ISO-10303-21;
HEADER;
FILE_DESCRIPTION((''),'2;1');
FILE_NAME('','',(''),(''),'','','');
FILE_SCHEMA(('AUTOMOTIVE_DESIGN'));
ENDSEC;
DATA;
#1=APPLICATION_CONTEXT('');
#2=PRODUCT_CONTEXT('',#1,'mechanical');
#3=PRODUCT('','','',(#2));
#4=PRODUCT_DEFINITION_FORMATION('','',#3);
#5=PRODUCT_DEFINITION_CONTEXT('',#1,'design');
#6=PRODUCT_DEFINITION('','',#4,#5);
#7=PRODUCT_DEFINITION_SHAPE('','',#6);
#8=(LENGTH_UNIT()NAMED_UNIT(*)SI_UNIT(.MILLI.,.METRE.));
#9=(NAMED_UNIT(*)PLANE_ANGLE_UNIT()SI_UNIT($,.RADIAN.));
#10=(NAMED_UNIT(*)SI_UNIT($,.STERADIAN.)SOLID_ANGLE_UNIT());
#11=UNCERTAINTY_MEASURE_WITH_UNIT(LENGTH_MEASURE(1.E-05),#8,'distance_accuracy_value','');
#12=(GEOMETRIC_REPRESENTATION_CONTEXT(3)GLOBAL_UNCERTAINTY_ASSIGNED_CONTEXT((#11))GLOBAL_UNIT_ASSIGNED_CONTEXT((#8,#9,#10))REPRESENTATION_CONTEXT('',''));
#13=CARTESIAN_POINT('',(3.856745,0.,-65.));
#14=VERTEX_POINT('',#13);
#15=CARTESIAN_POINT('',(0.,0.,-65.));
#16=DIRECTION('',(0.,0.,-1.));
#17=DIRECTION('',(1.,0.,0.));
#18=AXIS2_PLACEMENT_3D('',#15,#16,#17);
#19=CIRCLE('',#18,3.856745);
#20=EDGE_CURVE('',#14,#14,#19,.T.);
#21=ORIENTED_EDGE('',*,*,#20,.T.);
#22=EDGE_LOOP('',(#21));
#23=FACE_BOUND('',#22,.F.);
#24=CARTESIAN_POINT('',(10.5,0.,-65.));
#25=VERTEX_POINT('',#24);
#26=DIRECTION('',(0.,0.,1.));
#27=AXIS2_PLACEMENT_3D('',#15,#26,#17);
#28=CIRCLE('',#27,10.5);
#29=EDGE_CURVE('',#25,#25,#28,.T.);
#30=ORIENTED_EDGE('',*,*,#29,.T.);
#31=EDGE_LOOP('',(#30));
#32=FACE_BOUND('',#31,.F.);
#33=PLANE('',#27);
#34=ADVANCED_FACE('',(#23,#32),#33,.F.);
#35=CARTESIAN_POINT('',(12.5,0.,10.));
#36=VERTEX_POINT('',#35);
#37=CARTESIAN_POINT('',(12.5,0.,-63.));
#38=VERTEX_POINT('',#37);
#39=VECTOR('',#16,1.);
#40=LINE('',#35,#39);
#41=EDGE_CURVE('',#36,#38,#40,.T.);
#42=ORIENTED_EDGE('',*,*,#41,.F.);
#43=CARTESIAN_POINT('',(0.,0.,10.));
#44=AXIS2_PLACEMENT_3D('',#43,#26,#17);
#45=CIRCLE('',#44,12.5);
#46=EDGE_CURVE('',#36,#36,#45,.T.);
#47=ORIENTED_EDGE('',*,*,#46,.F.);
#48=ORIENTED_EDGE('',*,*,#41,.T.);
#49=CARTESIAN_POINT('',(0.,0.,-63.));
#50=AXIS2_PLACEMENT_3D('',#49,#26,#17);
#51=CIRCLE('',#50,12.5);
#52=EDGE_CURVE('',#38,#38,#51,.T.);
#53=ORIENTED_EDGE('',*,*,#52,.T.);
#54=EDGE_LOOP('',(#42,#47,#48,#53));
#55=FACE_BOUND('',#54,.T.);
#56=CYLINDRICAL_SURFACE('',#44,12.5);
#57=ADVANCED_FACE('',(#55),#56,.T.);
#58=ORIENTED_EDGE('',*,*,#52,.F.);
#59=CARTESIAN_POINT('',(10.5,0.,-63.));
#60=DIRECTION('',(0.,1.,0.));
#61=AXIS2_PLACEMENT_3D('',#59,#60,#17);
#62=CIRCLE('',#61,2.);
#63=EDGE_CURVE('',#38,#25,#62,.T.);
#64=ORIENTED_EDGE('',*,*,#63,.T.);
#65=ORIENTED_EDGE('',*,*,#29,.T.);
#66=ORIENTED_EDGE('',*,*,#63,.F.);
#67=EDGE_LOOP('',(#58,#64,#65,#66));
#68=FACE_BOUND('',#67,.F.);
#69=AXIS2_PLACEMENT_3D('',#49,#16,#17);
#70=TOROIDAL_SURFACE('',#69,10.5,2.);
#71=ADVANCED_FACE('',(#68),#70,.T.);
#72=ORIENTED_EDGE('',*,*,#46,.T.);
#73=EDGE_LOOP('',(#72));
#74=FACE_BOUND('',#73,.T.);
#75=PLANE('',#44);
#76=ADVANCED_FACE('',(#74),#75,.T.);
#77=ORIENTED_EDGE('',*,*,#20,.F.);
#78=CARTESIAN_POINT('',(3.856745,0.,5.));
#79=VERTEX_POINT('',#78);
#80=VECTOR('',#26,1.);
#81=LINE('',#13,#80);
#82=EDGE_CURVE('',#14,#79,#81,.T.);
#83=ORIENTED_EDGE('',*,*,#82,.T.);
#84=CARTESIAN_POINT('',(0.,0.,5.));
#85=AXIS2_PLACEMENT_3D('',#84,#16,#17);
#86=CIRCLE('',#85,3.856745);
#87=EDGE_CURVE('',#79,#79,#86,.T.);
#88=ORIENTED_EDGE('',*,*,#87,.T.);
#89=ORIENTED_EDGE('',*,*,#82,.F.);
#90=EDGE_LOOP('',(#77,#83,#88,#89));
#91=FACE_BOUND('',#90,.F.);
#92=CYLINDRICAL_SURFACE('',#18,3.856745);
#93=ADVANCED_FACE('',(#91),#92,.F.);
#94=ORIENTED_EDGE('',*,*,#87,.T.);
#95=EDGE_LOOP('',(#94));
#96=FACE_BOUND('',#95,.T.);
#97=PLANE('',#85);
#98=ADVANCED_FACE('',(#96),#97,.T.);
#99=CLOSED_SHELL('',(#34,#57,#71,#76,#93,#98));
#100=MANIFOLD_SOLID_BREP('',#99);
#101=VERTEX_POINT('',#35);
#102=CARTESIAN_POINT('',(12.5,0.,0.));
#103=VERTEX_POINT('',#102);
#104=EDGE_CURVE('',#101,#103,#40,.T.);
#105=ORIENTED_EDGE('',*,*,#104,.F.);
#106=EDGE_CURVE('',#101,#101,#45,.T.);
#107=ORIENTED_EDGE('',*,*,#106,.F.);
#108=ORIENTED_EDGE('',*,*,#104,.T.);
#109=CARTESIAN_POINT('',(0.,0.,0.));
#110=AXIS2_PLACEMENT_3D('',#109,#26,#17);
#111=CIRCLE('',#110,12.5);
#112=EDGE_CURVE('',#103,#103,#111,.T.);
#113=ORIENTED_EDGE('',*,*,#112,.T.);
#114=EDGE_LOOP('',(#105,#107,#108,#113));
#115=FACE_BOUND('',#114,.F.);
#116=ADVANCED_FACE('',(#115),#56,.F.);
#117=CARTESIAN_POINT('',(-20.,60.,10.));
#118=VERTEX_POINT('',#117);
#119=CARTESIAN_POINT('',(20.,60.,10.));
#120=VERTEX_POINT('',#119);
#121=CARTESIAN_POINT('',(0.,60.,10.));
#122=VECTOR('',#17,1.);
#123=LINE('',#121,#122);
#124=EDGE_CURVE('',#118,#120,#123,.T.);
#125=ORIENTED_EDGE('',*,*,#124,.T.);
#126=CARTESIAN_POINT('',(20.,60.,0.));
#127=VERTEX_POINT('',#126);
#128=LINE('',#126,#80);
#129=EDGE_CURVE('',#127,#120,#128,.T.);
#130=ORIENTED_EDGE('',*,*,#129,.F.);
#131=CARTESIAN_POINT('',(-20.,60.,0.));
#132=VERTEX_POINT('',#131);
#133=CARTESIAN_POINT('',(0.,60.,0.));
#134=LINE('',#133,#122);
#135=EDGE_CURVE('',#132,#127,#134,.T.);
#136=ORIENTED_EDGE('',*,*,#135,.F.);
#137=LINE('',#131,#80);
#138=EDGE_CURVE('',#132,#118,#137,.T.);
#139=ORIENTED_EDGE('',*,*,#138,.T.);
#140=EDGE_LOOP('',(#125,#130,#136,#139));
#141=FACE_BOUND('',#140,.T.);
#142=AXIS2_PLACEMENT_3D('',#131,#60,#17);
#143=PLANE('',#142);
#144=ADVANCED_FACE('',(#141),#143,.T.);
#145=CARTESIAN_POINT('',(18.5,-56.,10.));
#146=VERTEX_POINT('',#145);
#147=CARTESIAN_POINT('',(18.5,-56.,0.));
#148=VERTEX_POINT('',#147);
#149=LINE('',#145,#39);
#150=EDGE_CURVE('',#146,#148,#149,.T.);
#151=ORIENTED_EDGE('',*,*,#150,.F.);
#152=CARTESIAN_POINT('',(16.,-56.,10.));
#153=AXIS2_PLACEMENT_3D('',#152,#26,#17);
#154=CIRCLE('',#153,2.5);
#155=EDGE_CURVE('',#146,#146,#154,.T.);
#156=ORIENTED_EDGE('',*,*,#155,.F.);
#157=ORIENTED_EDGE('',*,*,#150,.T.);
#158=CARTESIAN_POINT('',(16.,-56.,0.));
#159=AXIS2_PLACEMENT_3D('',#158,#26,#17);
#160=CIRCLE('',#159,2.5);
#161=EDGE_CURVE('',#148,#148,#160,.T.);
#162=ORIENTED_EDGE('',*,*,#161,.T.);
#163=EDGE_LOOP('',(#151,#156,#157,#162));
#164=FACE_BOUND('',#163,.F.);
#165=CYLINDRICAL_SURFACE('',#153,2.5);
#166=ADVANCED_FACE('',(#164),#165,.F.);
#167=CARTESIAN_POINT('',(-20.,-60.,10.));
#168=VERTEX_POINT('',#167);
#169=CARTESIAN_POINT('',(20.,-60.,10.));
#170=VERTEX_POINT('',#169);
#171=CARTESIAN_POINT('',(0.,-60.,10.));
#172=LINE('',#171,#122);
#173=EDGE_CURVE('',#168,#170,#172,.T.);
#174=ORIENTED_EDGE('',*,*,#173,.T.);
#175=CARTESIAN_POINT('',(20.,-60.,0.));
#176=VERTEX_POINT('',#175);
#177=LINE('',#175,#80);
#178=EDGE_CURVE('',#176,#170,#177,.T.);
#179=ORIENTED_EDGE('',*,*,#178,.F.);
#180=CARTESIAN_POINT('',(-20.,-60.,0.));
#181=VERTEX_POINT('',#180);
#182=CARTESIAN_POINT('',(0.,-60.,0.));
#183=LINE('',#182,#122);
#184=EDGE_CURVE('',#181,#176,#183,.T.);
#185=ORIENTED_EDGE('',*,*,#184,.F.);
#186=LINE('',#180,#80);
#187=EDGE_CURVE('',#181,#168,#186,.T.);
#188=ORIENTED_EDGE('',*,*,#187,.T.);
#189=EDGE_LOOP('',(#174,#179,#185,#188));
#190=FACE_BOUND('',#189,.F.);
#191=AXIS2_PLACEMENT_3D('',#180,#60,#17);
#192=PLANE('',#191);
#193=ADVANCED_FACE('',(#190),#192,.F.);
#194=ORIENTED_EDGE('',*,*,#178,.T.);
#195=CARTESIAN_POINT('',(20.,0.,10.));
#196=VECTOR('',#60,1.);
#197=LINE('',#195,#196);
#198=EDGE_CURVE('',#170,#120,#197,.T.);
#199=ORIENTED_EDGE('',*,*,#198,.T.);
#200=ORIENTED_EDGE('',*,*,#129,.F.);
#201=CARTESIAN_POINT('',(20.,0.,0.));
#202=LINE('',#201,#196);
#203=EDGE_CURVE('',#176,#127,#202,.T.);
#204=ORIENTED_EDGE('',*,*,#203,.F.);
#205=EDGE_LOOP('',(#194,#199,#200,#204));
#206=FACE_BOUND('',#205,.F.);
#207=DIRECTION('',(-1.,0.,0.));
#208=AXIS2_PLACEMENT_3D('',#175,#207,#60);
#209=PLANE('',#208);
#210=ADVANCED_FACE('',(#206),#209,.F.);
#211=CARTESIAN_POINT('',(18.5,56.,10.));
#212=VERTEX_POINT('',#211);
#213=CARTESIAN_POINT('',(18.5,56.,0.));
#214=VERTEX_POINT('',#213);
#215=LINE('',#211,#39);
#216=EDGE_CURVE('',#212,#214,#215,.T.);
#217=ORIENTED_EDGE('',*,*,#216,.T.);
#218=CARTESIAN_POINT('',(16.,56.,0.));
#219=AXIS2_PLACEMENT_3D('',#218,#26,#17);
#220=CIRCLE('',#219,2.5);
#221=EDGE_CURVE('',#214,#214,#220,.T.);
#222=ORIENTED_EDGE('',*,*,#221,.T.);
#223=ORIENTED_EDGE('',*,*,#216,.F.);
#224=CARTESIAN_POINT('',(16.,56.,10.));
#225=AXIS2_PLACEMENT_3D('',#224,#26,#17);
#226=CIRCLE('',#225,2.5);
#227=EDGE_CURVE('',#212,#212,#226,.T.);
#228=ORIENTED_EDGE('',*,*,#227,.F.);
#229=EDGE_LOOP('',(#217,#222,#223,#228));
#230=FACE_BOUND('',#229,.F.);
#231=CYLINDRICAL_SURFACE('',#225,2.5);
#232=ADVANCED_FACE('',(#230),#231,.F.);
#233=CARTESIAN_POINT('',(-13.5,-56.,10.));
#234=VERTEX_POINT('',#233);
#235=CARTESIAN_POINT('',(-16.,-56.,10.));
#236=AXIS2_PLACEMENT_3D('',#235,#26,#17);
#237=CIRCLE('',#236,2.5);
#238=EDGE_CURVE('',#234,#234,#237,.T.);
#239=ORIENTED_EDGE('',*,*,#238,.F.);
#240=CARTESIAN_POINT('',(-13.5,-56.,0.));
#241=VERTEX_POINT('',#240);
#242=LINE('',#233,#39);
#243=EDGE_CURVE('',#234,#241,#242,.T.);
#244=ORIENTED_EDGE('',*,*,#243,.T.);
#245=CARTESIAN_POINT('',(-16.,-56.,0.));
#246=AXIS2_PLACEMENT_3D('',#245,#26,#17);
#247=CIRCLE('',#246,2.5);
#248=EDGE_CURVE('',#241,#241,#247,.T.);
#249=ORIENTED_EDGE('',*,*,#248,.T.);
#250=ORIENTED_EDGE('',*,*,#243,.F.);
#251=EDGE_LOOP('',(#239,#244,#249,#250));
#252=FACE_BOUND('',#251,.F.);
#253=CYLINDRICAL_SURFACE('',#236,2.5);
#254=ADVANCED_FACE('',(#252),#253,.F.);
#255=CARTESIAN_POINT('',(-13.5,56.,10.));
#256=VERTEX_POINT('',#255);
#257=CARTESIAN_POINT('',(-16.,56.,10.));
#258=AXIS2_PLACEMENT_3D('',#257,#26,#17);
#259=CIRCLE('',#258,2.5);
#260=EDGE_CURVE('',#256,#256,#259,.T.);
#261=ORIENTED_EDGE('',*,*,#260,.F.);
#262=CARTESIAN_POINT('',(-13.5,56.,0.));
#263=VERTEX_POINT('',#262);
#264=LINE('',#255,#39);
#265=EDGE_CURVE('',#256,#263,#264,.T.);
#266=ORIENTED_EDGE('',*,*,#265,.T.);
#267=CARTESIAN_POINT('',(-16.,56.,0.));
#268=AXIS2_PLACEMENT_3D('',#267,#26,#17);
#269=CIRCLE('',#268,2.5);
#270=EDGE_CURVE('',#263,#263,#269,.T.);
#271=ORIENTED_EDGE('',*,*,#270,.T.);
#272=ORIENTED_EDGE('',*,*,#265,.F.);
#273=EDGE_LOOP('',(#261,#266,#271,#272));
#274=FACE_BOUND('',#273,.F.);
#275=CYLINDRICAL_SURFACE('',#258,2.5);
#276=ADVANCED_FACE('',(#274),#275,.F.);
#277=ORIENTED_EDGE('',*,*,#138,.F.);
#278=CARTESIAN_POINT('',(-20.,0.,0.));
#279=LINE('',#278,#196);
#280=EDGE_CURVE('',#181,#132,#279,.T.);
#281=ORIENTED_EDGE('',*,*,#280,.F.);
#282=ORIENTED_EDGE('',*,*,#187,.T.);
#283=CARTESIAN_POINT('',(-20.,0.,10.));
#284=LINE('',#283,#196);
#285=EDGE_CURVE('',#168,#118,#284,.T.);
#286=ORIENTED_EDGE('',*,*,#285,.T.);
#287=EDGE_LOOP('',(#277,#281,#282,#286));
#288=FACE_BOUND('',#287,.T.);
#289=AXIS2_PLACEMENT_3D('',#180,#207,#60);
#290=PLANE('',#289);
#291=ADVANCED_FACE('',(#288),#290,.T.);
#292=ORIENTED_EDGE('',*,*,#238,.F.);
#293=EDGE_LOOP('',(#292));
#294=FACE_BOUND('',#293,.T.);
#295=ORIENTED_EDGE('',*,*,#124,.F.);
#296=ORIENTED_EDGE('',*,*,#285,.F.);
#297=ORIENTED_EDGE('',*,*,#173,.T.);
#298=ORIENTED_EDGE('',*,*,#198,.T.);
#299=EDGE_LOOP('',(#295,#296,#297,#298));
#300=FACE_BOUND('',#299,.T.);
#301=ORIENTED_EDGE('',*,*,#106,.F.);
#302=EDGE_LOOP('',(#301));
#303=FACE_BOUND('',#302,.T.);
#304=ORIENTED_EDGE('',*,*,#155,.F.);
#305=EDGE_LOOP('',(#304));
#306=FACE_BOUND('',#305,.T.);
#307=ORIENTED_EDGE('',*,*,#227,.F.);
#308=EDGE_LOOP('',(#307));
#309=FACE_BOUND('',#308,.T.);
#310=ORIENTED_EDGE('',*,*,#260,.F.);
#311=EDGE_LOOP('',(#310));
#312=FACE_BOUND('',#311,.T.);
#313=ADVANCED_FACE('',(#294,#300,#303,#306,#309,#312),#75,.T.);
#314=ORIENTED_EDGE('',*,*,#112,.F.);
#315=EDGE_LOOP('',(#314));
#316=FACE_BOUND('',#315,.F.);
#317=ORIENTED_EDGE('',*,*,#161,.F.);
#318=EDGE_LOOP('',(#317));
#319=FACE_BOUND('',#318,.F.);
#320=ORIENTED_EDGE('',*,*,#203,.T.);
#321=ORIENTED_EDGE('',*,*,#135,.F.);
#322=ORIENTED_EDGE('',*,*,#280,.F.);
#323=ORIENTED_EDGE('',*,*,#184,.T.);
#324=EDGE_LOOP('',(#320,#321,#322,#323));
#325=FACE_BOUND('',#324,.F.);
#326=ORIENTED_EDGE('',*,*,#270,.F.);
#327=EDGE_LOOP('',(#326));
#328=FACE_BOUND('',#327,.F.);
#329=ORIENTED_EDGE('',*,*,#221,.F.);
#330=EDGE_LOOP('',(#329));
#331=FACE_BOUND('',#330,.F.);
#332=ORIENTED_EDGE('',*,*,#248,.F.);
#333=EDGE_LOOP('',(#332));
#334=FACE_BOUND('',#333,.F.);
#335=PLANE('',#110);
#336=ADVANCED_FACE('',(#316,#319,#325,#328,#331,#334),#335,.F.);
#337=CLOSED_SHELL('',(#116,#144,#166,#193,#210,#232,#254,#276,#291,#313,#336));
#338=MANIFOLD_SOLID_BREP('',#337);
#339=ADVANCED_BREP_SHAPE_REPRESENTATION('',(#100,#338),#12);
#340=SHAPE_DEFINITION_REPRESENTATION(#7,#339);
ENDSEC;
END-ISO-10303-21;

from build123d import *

# Parameters (mm, degrees)
F0_W     = 40
F0_H     = 120
F1_DEPTH = 10
F2_R     = 12.5
F3_DEPTH = 75
F2_R_2   = 2.5
F4_DEPTH = 25
F5_R     = 2
F6_R     = 3.8567448675
F7_DEPTH = 70


with BuildPart() as f1:
    # F0 (on Top) → F1 (new body)
    with BuildSketch(Plane.XY):
        Rectangle(F0_W, F0_H)
    extrude(amount=F1_DEPTH)

    # F2 (on face) → F4 (cut)
    with BuildSketch(Plane.XY.offset(10)):
        with Locations((-16, 56)):
            Circle(F2_R_2)
        with Locations((16, 56)):
            Circle(F2_R_2)
        with Locations((-16, -56)):
            Circle(F2_R_2)
        with Locations((16, -56)):
            Circle(F2_R_2)
        Circle(F2_R)
    extrude(amount=-F4_DEPTH, mode=Mode.SUBTRACT)


with BuildPart() as f3:
    # F2 (on face) → F3 (new body)
    with BuildSketch(Plane.XY.offset(10)):
        Circle(F2_R)
    extrude(amount=-F3_DEPTH)

    # F5
    f5_edges = [f3.edges().sort_by_distance(p)[0] for p in [
        (-12.5, 0, -65),
    ]]
    fillet(f5_edges, radius=F5_R)

    # F6 (on face) → F7 (cut)
    with BuildSketch(Plane(origin=(0, 0, -65), x_dir=(1, 0, 0), z_dir=(0, 0, -1))):
        Circle(F6_R)
    extrude(amount=-F7_DEPTH, mode=Mode.SUBTRACT)


solid = Compound([f1.part, f3.part])
